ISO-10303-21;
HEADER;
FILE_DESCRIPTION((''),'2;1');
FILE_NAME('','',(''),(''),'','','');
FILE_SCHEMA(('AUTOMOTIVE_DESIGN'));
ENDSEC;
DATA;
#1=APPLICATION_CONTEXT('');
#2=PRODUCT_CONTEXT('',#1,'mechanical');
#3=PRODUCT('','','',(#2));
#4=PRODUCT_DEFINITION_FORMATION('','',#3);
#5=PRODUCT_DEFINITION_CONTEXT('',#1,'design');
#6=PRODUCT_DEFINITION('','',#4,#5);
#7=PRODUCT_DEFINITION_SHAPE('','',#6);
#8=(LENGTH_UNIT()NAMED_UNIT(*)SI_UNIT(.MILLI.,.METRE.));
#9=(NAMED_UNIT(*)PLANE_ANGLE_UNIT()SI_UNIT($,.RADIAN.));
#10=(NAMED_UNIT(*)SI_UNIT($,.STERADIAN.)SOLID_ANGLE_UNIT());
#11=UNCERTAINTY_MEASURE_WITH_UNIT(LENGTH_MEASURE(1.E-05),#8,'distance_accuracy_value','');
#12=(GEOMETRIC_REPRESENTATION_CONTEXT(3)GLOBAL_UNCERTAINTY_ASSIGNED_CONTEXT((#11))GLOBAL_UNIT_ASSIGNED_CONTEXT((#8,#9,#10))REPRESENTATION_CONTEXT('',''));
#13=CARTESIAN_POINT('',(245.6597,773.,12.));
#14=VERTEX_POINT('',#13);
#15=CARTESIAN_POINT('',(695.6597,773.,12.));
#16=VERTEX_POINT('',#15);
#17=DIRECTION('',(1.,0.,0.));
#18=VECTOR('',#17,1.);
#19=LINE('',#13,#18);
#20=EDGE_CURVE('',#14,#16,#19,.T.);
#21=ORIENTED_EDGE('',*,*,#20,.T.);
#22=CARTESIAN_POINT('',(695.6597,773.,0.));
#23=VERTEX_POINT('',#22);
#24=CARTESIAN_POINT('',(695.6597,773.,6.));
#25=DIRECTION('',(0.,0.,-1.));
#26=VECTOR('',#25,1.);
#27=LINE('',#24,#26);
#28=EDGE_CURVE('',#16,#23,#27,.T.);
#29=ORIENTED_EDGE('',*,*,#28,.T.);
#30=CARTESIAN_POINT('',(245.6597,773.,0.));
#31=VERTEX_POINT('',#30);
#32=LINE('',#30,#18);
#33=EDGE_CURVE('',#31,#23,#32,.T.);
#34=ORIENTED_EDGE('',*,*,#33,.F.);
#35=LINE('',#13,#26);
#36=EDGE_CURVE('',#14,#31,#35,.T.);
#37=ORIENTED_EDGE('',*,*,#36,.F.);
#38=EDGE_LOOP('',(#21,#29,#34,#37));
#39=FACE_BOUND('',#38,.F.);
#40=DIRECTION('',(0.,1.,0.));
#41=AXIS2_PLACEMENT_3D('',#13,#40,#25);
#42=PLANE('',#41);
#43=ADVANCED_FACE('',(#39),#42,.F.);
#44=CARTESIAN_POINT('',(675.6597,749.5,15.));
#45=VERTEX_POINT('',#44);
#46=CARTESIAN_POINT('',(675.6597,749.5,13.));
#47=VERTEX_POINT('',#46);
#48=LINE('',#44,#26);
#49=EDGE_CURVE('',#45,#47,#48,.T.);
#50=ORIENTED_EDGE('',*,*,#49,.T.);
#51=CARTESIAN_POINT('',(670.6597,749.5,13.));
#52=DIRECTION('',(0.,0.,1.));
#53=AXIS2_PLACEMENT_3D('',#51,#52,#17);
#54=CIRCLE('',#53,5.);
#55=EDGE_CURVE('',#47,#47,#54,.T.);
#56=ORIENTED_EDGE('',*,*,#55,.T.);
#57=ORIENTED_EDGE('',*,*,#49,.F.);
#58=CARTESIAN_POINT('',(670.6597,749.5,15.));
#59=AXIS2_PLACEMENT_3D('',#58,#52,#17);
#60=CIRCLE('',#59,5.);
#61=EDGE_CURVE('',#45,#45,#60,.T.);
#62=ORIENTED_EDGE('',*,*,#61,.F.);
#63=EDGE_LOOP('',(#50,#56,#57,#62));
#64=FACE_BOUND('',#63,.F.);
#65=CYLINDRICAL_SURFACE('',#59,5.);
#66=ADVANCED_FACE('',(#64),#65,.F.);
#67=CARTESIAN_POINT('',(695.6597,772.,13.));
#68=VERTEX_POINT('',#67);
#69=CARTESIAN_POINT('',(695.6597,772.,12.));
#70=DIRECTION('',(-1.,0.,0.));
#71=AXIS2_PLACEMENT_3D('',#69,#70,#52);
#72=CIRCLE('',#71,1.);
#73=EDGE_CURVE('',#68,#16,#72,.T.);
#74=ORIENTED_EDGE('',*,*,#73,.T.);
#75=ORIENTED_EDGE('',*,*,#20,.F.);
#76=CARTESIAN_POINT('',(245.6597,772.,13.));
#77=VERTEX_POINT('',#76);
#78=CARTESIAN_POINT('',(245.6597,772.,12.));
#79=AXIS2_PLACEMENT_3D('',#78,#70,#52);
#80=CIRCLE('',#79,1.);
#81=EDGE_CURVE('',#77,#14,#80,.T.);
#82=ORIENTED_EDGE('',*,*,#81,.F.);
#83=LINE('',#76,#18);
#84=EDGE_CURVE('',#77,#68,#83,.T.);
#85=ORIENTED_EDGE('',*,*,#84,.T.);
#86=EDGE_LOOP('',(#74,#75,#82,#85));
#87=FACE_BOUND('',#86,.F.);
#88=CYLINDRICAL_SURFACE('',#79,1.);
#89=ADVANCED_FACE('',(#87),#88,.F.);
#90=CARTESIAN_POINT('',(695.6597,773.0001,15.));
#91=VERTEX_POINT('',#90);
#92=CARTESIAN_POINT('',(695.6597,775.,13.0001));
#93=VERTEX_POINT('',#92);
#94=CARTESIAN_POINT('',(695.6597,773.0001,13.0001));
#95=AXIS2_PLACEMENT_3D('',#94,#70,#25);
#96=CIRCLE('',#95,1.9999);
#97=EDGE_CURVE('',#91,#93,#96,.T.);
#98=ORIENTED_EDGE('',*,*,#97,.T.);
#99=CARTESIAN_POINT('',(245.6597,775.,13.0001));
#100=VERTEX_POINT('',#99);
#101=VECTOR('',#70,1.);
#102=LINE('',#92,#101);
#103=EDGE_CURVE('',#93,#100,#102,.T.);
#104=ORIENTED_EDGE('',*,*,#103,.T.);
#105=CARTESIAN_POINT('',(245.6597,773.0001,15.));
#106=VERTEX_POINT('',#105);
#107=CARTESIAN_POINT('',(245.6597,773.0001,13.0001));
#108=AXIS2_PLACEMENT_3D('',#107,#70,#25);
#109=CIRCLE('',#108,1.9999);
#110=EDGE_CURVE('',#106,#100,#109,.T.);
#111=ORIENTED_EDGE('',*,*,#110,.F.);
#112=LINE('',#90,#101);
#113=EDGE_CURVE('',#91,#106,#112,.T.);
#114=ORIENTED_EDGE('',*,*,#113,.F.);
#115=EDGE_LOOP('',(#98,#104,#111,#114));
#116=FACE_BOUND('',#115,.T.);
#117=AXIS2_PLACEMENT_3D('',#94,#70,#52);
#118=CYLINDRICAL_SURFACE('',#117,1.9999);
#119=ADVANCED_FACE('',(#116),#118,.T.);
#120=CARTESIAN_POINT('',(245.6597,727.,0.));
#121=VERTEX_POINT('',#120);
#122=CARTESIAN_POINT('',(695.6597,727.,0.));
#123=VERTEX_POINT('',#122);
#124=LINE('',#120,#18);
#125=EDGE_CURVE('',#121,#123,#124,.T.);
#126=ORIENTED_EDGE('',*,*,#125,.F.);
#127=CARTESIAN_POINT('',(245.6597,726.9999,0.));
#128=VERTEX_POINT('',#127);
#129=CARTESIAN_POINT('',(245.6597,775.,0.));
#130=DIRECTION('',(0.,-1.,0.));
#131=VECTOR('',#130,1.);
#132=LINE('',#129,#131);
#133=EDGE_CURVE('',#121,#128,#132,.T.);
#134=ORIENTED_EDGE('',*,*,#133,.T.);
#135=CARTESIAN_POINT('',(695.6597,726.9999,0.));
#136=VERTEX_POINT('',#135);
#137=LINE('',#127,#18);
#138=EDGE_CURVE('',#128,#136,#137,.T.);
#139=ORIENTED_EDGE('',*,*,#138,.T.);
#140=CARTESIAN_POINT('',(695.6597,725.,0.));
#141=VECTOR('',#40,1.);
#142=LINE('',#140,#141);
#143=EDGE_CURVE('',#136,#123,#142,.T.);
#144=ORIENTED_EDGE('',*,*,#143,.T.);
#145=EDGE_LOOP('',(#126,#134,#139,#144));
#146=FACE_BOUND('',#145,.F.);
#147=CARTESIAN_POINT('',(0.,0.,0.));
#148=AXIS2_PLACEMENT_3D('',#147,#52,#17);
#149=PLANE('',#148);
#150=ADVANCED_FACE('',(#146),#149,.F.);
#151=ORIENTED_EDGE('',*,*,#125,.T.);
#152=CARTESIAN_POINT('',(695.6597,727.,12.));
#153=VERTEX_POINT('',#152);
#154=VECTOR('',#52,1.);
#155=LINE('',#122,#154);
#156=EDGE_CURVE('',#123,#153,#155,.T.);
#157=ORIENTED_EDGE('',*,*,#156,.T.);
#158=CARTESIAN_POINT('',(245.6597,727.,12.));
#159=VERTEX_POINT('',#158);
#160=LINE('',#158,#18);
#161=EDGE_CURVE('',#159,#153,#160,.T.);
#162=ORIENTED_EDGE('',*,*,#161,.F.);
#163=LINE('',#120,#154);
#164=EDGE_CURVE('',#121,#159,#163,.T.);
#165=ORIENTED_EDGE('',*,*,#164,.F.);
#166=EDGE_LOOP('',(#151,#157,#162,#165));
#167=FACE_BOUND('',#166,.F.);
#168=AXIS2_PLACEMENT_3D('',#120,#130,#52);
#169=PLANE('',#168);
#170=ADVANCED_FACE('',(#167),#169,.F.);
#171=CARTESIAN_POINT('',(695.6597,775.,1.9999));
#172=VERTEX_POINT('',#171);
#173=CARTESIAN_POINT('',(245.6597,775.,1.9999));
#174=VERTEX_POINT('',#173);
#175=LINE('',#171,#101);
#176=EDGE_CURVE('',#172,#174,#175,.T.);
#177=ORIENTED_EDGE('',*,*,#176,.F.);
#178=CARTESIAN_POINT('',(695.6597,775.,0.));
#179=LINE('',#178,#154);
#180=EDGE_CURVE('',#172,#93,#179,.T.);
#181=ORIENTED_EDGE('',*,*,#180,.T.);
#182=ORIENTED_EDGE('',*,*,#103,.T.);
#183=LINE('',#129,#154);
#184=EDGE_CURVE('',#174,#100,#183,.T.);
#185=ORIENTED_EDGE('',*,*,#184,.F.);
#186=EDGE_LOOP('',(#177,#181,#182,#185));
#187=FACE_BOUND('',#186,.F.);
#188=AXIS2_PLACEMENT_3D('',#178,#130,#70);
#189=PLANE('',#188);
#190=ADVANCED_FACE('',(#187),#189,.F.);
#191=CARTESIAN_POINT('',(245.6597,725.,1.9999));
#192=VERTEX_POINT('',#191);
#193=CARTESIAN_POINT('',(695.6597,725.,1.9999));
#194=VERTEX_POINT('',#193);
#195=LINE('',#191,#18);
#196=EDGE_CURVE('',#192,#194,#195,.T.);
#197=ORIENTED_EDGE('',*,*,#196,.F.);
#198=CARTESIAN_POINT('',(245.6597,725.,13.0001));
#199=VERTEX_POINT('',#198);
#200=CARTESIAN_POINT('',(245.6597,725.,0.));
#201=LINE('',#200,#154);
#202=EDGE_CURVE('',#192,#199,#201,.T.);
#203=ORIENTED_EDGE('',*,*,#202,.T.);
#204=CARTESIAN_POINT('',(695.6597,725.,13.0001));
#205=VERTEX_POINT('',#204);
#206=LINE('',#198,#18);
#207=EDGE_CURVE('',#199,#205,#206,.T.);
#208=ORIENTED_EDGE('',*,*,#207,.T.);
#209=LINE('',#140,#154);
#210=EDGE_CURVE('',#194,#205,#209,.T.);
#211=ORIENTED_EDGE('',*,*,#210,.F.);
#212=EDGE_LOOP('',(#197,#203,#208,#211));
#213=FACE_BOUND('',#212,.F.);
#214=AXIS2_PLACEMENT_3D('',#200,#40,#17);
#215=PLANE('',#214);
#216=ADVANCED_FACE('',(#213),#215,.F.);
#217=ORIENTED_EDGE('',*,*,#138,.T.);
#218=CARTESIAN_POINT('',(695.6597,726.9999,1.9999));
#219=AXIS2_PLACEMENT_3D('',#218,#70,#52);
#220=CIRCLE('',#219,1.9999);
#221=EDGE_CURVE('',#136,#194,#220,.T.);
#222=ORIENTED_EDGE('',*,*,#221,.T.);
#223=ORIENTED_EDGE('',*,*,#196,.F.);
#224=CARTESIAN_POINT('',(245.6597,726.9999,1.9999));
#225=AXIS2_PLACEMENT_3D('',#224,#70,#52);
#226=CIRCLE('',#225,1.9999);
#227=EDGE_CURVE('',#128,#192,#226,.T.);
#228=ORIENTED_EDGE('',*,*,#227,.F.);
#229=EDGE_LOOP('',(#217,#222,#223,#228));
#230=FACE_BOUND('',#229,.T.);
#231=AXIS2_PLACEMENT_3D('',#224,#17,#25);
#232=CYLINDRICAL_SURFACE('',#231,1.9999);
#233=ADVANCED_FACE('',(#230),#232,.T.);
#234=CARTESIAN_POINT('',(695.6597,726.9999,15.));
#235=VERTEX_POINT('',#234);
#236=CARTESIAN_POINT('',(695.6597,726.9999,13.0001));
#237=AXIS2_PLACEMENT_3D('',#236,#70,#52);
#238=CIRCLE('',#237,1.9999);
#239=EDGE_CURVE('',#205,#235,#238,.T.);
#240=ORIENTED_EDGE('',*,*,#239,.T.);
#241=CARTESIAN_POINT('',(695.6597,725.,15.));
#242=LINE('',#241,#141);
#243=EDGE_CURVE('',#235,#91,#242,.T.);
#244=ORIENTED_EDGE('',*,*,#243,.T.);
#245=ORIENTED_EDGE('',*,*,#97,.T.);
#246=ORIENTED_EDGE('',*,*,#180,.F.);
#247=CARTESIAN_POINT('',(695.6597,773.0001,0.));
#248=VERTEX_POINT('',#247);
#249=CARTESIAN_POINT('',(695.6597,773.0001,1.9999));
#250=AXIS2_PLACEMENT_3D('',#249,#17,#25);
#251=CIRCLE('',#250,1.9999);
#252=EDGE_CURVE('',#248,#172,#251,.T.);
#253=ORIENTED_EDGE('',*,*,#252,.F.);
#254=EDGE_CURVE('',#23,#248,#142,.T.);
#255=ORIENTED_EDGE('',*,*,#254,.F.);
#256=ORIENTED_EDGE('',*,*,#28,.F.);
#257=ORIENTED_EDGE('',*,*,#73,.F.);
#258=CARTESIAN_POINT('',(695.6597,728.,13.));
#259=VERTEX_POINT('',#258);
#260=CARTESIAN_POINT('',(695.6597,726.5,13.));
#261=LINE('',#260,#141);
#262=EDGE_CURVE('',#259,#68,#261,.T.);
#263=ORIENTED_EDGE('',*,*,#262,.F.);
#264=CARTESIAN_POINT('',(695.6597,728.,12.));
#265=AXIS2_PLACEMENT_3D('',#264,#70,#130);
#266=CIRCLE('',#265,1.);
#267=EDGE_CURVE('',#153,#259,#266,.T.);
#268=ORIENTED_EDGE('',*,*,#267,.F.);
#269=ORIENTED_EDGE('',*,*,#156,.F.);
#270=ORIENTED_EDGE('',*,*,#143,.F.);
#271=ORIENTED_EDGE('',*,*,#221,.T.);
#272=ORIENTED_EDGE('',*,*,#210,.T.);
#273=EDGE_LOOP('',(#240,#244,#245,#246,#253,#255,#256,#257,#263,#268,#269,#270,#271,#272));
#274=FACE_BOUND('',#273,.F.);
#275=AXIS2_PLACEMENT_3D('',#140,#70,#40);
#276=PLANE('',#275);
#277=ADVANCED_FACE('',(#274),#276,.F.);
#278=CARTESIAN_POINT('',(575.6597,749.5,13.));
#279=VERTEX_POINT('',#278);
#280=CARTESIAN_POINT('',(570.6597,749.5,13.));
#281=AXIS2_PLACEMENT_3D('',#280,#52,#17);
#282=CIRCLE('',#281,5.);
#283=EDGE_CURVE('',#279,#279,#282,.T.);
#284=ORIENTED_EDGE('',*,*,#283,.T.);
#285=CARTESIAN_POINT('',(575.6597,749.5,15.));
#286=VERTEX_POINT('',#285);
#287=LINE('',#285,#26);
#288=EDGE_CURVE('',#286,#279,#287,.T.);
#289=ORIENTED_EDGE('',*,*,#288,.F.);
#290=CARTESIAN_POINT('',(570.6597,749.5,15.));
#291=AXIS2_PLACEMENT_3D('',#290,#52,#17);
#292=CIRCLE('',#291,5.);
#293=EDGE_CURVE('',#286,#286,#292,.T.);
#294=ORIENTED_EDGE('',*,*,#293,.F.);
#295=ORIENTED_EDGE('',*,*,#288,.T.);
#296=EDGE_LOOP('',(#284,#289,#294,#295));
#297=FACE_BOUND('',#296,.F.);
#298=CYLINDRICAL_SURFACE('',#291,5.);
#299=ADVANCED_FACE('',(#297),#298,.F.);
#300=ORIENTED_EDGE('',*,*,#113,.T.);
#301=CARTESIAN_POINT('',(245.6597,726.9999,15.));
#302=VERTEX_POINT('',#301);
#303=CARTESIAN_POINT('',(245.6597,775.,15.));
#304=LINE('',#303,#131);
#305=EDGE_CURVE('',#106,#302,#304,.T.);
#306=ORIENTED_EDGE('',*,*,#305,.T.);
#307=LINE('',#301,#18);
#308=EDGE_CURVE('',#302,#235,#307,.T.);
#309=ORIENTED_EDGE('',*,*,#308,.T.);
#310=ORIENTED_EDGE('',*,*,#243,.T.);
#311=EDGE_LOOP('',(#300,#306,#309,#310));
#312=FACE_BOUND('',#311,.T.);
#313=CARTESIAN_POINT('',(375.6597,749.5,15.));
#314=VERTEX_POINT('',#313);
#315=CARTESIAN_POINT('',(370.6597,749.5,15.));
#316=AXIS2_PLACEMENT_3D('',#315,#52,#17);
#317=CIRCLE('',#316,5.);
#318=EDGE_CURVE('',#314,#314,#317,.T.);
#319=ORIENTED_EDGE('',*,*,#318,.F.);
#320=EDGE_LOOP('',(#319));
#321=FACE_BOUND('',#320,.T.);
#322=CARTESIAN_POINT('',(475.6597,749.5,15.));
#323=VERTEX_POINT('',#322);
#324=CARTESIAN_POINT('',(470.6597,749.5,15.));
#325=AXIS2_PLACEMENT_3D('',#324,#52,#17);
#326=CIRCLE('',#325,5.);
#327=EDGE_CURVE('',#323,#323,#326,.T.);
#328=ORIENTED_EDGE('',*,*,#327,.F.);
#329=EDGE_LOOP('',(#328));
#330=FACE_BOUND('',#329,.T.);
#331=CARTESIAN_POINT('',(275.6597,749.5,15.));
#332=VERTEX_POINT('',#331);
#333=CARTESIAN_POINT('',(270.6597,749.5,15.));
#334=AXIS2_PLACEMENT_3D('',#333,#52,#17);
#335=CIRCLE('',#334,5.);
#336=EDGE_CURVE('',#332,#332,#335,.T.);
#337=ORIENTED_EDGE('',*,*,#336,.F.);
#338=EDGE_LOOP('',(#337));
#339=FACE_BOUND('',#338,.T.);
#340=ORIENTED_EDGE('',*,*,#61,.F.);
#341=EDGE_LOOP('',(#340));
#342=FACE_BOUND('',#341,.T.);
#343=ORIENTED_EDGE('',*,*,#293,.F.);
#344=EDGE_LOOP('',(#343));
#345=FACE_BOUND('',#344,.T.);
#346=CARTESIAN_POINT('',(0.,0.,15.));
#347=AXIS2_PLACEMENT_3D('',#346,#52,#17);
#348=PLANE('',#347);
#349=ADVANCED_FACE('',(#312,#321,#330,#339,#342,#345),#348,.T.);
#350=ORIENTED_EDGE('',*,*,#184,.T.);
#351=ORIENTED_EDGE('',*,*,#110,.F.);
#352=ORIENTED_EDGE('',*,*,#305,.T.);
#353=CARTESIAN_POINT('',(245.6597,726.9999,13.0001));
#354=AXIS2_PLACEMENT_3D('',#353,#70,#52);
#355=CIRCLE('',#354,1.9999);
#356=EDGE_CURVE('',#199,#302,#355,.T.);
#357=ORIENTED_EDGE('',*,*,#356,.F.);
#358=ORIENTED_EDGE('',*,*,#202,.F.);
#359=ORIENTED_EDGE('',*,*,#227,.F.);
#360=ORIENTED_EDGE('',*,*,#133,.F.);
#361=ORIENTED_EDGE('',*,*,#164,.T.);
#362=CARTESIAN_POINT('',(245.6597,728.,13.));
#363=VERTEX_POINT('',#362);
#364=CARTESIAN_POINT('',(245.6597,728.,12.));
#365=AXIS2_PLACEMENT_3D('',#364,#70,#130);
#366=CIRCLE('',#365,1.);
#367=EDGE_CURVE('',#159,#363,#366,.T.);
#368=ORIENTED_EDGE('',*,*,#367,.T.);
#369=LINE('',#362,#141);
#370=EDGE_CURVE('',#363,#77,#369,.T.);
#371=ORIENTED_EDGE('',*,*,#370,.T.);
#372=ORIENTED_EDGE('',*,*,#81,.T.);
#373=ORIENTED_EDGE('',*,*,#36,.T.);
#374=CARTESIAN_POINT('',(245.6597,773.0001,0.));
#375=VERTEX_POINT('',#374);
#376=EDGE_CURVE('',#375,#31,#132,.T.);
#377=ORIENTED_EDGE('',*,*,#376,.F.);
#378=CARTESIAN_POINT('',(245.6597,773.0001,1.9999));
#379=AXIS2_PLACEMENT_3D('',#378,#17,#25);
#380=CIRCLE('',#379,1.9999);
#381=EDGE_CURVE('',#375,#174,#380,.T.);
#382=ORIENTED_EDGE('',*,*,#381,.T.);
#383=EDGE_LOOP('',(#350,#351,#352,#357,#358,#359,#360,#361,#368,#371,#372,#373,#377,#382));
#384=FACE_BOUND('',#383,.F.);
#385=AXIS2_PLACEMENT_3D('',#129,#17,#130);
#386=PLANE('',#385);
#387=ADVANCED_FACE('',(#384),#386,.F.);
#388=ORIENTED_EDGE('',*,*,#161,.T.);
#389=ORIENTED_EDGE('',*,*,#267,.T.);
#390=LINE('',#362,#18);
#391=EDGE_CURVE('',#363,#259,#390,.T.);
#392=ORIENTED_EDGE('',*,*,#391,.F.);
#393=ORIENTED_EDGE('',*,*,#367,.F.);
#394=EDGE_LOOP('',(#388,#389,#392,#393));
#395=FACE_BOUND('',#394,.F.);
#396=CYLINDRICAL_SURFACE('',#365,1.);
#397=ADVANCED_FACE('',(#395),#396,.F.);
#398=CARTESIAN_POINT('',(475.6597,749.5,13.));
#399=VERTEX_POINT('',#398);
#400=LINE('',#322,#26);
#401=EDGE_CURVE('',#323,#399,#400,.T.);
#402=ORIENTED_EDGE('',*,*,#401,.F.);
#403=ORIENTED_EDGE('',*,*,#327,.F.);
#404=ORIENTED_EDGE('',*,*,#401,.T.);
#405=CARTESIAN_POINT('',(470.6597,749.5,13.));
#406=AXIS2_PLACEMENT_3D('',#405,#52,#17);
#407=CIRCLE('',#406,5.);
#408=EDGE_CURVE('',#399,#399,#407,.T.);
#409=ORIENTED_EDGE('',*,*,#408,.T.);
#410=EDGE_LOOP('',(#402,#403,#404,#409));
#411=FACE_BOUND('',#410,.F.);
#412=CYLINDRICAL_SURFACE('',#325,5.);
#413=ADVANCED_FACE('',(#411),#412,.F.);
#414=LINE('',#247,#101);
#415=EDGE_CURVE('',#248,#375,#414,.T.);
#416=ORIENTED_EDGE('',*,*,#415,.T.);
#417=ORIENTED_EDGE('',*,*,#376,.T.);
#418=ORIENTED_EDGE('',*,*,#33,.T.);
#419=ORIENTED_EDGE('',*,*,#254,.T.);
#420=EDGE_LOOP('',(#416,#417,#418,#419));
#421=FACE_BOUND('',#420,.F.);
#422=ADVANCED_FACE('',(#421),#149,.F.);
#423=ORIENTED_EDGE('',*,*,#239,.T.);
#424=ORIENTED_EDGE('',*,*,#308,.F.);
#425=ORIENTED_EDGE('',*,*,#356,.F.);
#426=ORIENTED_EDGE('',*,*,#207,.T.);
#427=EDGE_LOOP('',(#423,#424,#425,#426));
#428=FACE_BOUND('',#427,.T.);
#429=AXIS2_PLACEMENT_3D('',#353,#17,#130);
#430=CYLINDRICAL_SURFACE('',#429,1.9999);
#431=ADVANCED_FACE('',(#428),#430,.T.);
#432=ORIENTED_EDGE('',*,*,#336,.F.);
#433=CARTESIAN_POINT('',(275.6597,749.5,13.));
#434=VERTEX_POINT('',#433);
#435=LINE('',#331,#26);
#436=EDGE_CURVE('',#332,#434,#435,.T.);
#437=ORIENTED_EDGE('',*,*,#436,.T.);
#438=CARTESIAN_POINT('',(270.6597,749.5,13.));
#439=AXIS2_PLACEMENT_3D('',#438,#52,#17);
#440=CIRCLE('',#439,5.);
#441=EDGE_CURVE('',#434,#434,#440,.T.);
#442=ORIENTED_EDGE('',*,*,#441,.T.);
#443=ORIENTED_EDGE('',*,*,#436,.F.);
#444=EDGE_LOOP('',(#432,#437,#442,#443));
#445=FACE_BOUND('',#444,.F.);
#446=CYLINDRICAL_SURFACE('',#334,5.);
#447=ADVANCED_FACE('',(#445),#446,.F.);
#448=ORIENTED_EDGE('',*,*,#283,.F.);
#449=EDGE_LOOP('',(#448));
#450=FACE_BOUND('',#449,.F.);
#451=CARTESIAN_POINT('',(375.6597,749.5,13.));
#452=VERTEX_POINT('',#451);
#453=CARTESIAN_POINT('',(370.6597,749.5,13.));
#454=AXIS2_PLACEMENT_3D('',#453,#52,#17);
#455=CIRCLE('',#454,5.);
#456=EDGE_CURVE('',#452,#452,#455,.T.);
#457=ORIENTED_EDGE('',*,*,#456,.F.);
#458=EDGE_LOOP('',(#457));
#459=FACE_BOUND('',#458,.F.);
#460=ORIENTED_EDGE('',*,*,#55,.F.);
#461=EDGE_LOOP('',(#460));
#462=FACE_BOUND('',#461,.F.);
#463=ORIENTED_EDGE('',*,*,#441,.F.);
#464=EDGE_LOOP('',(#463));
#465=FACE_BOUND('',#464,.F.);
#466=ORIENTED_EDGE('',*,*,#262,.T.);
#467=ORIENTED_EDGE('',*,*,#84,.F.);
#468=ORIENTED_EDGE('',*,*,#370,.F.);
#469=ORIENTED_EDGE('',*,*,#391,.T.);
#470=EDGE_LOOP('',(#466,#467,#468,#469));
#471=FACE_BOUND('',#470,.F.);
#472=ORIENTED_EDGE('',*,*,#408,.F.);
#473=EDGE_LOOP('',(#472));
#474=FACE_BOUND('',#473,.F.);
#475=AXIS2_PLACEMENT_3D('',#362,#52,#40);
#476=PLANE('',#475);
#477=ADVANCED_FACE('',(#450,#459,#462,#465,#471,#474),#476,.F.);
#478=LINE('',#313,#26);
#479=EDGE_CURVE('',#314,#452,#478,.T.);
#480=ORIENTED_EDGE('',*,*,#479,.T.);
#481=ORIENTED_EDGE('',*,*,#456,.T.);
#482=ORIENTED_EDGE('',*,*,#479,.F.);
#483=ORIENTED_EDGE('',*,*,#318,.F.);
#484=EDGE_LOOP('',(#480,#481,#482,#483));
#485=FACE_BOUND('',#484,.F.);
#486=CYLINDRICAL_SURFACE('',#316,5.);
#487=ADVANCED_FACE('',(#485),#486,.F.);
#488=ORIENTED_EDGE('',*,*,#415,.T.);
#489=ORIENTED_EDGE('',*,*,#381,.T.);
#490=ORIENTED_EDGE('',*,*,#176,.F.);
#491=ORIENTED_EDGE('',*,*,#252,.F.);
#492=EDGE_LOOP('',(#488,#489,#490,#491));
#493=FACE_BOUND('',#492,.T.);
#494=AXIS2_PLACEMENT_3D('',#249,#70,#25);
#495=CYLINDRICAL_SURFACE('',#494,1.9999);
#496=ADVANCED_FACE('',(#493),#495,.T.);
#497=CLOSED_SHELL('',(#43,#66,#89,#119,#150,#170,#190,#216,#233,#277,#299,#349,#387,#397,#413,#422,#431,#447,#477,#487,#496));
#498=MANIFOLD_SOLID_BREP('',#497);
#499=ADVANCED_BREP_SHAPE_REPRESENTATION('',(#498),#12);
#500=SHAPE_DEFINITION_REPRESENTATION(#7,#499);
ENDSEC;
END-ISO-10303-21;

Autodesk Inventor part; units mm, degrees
ref_plane "YZ Plane" through (0, 0, 0) normal (1, 0, 0) x (0, 1, 0)
ref_plane "XZ Plane" through (0, 0, 0) normal (0, 1, 0) x (-1, 0, 0)
ref_plane "Work Plane1" through (0, 0, 0) normal (0, 0, 1) x (1, 0, 0)
sketch "Sketch1" plane through (0, 0, 0) normal (0, 0, 1) x (1, 0, 0)
  line L0 (245.6597, 725) -> (695.6597, 725)
  line L1 (695.6597, 725) -> (695.6597, 775)
  line L2 (695.6597, 775) -> (245.6597, 775)
  line L3 (245.6597, 775) -> (245.6597, 725)
  line L4 (164.0316, 10) -> (164.0316, 1490) projected
  line L5 (777.2877, 10) -> (164.0316, 10) projected
  line L6 (470.6597, 10) -> (470.6597, 1506) construction
  line L7 (164.0316, 750) -> (680, 750) construction
  point P0 (0, 0)
  point P1 (470.6597, 725)
  point P2 (245.6597, 750)
  dimension "d0" = 450
  dimension "d1" = 50
extrude "Extrusion1" add sketch "Sketch1" along normal blind 15
sketch "Sketch2" plane through (245.6597, 725, 0) normal (-1, 0, 0) x (0, 0, 1)
  line L0 (15, 0) -> (0, 0) projected
  line L1 (0, 0) -> (0, 50) projected
  line L2 (0, 50) -> (15, 50) projected
  line L3 (15, 50) -> (15, 0) projected
  line L4 (12, 48) -> (0, 48)
  line L5 (0, 2) -> (12, 2)
  line L6 (13, 3) -> (13, 47)
  arc A0 (13, 47) -> (12, 48) centre (12, 47) ccw
  arc A1 (12, 2) -> (13, 3) centre (12, 3) ccw
  point P0 (0, -725)
  dimension "d5" = 2
extrude "Extrusion2" cut sketch "Sketch2" against normal through all contours L1 L4 A0 L6 A1 L5
fillet "Fillet1" radius 2 4 edges at (470.6597, 775, 15) (470.6597, 775, 0) (470.6597, 725, 0) (470.6597, 725, 15)
sketch "Sketch3" plane through (0, 0, 15) normal (0, 0, 1) x (1, 0, 0)
  line L0 (245.6597, 727) -> (695.6597, 727) construction
  line L1 (695.6597, 773) -> (695.6597, 727) construction
  line L2 (695.6597, 773) -> (245.6597, 773) construction
  line L3 (245.6597, 727) -> (245.6597, 773) construction
  line L4 (245.6597, 772) -> (695.6597, 772) projected
  line L5 (470.6597, 772) -> (470.6597, 727) construction
  circle A0 centre (470.6597, 749.5) radius 5
  point P0 (0, 0)
  dimension "d10" = 10
extrude "Extrusion3" cut sketch "Sketch3" against normal up to next
pattern_linear "Rectangular Pattern1" count 5 spacing 100 along (1, 0, 0) of "Extrusion3" first direction both ways yes
properties part number "support1" material "Stainless Steel"
